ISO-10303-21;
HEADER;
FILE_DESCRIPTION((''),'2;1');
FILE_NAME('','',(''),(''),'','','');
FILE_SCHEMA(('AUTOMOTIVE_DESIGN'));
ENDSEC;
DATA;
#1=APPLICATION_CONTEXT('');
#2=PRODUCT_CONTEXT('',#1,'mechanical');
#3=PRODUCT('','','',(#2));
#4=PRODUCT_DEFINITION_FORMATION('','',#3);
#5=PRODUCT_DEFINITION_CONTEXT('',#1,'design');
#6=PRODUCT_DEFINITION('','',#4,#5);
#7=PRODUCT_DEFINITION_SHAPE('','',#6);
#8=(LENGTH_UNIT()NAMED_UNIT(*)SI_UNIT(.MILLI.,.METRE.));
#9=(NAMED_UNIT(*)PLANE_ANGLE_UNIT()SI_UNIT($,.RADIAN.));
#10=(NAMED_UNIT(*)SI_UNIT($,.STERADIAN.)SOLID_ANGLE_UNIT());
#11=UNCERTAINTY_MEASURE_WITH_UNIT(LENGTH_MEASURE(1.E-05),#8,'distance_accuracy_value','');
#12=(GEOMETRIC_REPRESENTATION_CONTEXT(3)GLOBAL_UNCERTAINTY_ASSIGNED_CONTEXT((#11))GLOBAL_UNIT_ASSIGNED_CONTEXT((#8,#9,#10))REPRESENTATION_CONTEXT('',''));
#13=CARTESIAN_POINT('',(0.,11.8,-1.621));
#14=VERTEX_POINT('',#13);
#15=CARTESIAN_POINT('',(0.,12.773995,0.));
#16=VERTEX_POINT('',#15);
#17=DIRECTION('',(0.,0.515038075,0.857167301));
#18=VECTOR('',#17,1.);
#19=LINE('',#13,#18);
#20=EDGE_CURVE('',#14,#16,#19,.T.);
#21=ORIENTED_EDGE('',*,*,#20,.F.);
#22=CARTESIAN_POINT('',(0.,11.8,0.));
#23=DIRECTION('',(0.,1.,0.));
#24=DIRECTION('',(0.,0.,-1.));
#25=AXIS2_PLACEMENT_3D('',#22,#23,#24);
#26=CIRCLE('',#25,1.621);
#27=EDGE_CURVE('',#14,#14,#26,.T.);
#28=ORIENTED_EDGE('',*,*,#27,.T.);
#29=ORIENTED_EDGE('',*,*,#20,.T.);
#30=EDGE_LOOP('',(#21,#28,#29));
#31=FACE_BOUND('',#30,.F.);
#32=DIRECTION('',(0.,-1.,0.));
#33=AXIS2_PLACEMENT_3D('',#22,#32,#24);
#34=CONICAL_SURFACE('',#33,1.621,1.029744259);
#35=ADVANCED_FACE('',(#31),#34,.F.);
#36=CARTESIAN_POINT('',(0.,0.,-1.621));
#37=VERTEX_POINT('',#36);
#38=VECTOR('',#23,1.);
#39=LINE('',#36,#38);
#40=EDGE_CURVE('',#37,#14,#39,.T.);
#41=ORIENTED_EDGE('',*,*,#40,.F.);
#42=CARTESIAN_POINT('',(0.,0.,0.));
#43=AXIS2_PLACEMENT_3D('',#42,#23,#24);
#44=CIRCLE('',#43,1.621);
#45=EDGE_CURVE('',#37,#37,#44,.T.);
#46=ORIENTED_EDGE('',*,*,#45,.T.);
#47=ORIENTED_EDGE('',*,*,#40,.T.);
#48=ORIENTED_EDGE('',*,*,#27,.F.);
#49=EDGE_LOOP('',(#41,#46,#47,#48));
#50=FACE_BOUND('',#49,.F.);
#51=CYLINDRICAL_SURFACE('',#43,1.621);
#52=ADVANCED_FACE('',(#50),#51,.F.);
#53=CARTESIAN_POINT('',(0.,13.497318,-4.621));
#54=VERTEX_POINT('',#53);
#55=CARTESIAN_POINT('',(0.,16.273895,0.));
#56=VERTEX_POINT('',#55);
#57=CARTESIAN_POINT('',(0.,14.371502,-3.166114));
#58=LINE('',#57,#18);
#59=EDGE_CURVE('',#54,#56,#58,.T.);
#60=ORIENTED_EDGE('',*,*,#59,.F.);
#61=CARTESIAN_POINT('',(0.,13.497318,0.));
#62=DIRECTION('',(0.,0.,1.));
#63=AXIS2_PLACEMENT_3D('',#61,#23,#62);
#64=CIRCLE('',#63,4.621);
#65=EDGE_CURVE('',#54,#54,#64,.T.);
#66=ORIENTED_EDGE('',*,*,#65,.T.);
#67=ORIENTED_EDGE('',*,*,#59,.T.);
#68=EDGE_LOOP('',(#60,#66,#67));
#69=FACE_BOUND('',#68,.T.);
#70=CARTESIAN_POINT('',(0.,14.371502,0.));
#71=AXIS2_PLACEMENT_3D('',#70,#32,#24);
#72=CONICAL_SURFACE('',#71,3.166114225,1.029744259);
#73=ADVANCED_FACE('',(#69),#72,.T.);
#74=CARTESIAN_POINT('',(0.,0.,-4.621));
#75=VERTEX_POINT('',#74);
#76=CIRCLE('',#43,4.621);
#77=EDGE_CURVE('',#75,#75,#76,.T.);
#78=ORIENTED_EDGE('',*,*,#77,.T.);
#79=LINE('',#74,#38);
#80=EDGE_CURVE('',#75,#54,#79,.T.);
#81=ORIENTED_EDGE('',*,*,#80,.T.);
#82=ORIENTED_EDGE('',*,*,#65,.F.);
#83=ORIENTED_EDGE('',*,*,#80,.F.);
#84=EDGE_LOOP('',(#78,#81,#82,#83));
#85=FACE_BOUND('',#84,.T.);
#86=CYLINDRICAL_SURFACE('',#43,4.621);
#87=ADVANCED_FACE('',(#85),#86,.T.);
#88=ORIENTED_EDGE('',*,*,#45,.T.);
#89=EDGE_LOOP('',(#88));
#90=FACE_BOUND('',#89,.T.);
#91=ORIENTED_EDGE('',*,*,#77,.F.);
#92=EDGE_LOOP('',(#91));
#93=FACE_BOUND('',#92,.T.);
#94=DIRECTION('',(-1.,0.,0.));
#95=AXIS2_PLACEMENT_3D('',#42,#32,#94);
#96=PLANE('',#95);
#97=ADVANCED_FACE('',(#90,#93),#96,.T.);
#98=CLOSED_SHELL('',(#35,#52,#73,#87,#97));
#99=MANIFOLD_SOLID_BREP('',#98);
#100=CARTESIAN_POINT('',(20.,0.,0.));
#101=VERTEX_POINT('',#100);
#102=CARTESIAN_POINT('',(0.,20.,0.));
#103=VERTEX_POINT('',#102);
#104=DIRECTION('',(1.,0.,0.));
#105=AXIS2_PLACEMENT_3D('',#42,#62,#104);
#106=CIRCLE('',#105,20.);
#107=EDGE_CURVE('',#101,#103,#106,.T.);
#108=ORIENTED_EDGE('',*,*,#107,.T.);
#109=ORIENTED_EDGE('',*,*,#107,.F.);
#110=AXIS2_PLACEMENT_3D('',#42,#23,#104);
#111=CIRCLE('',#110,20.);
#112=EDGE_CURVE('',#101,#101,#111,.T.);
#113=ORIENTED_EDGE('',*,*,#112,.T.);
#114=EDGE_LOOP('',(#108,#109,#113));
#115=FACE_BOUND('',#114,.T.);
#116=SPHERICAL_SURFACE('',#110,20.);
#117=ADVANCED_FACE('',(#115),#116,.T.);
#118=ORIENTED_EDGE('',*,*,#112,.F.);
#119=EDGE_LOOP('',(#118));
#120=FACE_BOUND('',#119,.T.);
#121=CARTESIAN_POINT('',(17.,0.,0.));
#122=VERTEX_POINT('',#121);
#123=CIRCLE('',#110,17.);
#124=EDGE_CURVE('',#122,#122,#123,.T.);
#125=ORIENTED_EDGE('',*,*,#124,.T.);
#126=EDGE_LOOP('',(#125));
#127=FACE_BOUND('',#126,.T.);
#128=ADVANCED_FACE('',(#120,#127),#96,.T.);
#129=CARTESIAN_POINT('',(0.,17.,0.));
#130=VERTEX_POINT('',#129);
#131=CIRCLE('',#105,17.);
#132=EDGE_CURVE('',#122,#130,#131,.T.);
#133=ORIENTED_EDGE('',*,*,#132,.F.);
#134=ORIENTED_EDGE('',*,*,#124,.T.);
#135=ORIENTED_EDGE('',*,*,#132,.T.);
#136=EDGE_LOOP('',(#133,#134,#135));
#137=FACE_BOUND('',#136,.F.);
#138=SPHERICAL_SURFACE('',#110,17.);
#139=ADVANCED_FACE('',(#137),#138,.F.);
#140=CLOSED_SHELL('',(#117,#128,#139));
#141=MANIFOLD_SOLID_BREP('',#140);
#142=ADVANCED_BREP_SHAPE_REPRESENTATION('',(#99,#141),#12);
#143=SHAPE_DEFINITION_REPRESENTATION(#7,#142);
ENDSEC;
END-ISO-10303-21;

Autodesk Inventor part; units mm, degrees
ref_plane "YZ Plane" through (0, 0, 0) normal (1, 0, 0) x (0, 1, 0)
ref_plane "XZ Plane" through (0, 0, 0) normal (0, 1, 0) x (-1, 0, 0)
ref_plane "XY Plane" through (0, 0, 0) normal (0, 0, 1) x (1, 0, 0)
sketch "Sketch1" plane through (0, 0, 0) normal (0, 0, 1) x (1, 0, 0)
  line L0 (0, 0) -> (0, 20)
  line L1 (0, 0) -> (20, 0)
  arc A0 (20, 0) -> (0, 20) centre (0, 0) ccw
  line L2 (0, -4.8284) -> (0, 28.9706) projected
  dimension "d2" = 20
revolve "Revolution1" add sketch "Sketch1" angle 360 about axis through (0, -10, 0) along (0, 1, 0)
sketch "Sketch4" plane through (0, 0, 0) normal (0, -1, 0) x (1, 0, 0)
  point P0 (0, 0)
  point P1 (0, 0)
hole "Hole2" at (0, 0, 0) direction (0, 1, 0) diameter 3.242 depth 11.8 tip angle 118 thread size "M4x0.7" class "6H" standard "ANSI Metric M Profile"
shell "Shell2" thickness 3 removed faces 1 at (13.676, 0, 1.6606)
properties part number "Ball_Upper Half" material "Nylon 6/6"
